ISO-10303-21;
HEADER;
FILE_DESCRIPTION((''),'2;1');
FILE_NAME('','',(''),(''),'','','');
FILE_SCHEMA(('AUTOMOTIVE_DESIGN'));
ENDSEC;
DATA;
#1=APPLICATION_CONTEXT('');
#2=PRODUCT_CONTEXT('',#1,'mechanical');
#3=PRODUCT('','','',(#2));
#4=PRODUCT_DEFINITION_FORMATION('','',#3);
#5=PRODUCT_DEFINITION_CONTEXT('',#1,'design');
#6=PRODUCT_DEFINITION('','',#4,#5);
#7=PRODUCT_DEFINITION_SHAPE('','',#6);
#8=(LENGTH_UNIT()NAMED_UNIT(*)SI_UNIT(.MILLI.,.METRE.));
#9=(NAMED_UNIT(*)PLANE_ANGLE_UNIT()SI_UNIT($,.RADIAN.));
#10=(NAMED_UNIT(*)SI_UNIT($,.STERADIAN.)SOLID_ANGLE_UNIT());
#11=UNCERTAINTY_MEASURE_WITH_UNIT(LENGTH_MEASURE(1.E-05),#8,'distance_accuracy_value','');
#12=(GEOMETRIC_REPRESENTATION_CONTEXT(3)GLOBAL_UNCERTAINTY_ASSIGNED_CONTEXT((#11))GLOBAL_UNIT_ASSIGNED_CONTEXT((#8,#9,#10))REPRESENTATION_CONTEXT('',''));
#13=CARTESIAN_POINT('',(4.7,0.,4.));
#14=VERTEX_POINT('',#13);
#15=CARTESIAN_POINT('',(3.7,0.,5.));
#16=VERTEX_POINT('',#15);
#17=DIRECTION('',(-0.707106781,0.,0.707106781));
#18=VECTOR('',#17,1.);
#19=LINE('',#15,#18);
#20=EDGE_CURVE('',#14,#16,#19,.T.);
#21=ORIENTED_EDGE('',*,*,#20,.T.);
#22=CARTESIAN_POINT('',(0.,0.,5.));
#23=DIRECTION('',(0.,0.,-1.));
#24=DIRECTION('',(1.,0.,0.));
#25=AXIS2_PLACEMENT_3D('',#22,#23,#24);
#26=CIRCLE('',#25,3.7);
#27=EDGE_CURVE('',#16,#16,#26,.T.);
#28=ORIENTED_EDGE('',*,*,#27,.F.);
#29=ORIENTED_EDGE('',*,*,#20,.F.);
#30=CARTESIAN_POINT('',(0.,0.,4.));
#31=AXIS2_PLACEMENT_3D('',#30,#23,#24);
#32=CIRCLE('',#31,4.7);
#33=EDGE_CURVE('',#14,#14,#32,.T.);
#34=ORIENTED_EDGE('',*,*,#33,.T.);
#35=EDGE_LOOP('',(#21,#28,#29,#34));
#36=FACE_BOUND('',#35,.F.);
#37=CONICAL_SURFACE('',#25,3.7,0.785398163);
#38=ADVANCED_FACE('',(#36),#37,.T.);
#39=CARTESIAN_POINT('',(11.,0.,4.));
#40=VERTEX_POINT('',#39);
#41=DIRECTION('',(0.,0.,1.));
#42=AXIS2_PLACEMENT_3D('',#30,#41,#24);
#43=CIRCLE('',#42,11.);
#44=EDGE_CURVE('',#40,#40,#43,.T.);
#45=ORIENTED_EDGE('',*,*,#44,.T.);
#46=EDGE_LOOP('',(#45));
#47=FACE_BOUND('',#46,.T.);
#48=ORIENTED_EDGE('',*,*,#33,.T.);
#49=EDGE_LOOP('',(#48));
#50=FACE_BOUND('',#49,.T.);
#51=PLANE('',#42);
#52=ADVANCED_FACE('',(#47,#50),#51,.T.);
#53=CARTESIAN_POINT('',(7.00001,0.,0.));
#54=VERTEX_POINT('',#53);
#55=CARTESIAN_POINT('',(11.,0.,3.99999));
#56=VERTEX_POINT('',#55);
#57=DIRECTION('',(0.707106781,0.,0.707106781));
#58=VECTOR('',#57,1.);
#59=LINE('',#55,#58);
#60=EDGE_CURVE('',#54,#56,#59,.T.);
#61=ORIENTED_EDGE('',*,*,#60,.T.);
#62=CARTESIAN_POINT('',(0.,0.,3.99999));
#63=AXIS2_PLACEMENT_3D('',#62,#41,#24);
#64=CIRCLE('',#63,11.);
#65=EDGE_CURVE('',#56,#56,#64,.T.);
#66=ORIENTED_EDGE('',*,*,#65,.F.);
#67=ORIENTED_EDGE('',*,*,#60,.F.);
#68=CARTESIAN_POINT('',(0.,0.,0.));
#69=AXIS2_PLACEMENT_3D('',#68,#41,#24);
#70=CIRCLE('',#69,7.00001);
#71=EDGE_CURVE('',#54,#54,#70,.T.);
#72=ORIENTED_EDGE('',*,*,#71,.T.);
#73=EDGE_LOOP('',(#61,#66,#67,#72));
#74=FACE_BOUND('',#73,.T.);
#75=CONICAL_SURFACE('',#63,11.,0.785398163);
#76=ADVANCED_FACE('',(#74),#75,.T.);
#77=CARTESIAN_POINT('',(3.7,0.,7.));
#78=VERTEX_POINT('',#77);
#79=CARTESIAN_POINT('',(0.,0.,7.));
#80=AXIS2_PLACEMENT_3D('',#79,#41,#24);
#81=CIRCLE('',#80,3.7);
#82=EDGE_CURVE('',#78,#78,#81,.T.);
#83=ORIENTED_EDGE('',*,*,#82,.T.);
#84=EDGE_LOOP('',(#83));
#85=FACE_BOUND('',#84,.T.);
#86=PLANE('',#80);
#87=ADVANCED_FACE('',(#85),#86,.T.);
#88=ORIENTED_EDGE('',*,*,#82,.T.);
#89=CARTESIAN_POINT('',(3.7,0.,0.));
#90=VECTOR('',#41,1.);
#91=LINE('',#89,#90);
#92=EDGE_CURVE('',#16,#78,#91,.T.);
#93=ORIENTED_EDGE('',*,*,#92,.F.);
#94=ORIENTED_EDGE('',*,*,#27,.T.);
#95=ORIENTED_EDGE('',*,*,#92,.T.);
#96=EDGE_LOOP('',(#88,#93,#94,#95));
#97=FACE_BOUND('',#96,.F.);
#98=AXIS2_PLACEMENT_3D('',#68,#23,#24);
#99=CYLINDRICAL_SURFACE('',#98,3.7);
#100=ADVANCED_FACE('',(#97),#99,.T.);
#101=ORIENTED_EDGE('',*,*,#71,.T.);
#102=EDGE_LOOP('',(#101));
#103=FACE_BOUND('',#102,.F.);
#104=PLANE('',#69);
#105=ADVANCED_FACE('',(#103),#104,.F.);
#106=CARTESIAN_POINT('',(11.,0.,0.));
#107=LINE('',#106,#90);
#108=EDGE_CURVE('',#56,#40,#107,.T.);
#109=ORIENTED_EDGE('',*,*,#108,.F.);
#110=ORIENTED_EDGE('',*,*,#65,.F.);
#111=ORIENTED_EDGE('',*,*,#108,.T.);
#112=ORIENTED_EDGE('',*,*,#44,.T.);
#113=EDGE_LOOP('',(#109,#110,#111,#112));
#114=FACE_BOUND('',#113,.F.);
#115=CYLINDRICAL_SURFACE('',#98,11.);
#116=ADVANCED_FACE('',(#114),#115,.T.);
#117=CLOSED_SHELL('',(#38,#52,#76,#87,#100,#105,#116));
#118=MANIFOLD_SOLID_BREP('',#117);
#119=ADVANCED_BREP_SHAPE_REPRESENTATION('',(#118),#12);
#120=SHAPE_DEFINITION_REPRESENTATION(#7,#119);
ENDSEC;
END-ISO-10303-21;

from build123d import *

# Parameters (mm, degrees)
F0_R     = 11
F0_R_2   = 3.7
F1_DEPTH = 4
F2_DEPTH = 7
F3_SIZE  = 3.99999
F4_SIZE  = 1


# Not quite as in the source:
# - a fillet or chamfer is up to 0.001 mm smaller than in the source, because OpenCascade refuses the exact size


with BuildPart() as f1:
    # F0 (on Top) → F1 (new body)
    with BuildSketch(Plane.XY):
        Circle(F0_R)
        Circle(F0_R_2, mode=Mode.SUBTRACT)
        Circle(F0_R_2)
    extrude(amount=F1_DEPTH)

    # F0 (on Top) → F2 (join)
    with BuildSketch(Plane.XY):
        Circle(F0_R_2)
    extrude(amount=F2_DEPTH)

    # F3 (size 4 in the source; OpenCascade refuses exactly that, so slightly less here)
    f3_edges = [f1.edges().sort_by_distance(p)[0] for p in [
        (-11, 0, 0),
    ]]
    chamfer(f3_edges, length=F3_SIZE)

    # F4
    f4_edges = [f1.edges().sort_by_distance(p)[0] for p in [
        (-3.7, 0, 4),
    ]]
    chamfer(f4_edges, length=F4_SIZE)


solid = f1.part
